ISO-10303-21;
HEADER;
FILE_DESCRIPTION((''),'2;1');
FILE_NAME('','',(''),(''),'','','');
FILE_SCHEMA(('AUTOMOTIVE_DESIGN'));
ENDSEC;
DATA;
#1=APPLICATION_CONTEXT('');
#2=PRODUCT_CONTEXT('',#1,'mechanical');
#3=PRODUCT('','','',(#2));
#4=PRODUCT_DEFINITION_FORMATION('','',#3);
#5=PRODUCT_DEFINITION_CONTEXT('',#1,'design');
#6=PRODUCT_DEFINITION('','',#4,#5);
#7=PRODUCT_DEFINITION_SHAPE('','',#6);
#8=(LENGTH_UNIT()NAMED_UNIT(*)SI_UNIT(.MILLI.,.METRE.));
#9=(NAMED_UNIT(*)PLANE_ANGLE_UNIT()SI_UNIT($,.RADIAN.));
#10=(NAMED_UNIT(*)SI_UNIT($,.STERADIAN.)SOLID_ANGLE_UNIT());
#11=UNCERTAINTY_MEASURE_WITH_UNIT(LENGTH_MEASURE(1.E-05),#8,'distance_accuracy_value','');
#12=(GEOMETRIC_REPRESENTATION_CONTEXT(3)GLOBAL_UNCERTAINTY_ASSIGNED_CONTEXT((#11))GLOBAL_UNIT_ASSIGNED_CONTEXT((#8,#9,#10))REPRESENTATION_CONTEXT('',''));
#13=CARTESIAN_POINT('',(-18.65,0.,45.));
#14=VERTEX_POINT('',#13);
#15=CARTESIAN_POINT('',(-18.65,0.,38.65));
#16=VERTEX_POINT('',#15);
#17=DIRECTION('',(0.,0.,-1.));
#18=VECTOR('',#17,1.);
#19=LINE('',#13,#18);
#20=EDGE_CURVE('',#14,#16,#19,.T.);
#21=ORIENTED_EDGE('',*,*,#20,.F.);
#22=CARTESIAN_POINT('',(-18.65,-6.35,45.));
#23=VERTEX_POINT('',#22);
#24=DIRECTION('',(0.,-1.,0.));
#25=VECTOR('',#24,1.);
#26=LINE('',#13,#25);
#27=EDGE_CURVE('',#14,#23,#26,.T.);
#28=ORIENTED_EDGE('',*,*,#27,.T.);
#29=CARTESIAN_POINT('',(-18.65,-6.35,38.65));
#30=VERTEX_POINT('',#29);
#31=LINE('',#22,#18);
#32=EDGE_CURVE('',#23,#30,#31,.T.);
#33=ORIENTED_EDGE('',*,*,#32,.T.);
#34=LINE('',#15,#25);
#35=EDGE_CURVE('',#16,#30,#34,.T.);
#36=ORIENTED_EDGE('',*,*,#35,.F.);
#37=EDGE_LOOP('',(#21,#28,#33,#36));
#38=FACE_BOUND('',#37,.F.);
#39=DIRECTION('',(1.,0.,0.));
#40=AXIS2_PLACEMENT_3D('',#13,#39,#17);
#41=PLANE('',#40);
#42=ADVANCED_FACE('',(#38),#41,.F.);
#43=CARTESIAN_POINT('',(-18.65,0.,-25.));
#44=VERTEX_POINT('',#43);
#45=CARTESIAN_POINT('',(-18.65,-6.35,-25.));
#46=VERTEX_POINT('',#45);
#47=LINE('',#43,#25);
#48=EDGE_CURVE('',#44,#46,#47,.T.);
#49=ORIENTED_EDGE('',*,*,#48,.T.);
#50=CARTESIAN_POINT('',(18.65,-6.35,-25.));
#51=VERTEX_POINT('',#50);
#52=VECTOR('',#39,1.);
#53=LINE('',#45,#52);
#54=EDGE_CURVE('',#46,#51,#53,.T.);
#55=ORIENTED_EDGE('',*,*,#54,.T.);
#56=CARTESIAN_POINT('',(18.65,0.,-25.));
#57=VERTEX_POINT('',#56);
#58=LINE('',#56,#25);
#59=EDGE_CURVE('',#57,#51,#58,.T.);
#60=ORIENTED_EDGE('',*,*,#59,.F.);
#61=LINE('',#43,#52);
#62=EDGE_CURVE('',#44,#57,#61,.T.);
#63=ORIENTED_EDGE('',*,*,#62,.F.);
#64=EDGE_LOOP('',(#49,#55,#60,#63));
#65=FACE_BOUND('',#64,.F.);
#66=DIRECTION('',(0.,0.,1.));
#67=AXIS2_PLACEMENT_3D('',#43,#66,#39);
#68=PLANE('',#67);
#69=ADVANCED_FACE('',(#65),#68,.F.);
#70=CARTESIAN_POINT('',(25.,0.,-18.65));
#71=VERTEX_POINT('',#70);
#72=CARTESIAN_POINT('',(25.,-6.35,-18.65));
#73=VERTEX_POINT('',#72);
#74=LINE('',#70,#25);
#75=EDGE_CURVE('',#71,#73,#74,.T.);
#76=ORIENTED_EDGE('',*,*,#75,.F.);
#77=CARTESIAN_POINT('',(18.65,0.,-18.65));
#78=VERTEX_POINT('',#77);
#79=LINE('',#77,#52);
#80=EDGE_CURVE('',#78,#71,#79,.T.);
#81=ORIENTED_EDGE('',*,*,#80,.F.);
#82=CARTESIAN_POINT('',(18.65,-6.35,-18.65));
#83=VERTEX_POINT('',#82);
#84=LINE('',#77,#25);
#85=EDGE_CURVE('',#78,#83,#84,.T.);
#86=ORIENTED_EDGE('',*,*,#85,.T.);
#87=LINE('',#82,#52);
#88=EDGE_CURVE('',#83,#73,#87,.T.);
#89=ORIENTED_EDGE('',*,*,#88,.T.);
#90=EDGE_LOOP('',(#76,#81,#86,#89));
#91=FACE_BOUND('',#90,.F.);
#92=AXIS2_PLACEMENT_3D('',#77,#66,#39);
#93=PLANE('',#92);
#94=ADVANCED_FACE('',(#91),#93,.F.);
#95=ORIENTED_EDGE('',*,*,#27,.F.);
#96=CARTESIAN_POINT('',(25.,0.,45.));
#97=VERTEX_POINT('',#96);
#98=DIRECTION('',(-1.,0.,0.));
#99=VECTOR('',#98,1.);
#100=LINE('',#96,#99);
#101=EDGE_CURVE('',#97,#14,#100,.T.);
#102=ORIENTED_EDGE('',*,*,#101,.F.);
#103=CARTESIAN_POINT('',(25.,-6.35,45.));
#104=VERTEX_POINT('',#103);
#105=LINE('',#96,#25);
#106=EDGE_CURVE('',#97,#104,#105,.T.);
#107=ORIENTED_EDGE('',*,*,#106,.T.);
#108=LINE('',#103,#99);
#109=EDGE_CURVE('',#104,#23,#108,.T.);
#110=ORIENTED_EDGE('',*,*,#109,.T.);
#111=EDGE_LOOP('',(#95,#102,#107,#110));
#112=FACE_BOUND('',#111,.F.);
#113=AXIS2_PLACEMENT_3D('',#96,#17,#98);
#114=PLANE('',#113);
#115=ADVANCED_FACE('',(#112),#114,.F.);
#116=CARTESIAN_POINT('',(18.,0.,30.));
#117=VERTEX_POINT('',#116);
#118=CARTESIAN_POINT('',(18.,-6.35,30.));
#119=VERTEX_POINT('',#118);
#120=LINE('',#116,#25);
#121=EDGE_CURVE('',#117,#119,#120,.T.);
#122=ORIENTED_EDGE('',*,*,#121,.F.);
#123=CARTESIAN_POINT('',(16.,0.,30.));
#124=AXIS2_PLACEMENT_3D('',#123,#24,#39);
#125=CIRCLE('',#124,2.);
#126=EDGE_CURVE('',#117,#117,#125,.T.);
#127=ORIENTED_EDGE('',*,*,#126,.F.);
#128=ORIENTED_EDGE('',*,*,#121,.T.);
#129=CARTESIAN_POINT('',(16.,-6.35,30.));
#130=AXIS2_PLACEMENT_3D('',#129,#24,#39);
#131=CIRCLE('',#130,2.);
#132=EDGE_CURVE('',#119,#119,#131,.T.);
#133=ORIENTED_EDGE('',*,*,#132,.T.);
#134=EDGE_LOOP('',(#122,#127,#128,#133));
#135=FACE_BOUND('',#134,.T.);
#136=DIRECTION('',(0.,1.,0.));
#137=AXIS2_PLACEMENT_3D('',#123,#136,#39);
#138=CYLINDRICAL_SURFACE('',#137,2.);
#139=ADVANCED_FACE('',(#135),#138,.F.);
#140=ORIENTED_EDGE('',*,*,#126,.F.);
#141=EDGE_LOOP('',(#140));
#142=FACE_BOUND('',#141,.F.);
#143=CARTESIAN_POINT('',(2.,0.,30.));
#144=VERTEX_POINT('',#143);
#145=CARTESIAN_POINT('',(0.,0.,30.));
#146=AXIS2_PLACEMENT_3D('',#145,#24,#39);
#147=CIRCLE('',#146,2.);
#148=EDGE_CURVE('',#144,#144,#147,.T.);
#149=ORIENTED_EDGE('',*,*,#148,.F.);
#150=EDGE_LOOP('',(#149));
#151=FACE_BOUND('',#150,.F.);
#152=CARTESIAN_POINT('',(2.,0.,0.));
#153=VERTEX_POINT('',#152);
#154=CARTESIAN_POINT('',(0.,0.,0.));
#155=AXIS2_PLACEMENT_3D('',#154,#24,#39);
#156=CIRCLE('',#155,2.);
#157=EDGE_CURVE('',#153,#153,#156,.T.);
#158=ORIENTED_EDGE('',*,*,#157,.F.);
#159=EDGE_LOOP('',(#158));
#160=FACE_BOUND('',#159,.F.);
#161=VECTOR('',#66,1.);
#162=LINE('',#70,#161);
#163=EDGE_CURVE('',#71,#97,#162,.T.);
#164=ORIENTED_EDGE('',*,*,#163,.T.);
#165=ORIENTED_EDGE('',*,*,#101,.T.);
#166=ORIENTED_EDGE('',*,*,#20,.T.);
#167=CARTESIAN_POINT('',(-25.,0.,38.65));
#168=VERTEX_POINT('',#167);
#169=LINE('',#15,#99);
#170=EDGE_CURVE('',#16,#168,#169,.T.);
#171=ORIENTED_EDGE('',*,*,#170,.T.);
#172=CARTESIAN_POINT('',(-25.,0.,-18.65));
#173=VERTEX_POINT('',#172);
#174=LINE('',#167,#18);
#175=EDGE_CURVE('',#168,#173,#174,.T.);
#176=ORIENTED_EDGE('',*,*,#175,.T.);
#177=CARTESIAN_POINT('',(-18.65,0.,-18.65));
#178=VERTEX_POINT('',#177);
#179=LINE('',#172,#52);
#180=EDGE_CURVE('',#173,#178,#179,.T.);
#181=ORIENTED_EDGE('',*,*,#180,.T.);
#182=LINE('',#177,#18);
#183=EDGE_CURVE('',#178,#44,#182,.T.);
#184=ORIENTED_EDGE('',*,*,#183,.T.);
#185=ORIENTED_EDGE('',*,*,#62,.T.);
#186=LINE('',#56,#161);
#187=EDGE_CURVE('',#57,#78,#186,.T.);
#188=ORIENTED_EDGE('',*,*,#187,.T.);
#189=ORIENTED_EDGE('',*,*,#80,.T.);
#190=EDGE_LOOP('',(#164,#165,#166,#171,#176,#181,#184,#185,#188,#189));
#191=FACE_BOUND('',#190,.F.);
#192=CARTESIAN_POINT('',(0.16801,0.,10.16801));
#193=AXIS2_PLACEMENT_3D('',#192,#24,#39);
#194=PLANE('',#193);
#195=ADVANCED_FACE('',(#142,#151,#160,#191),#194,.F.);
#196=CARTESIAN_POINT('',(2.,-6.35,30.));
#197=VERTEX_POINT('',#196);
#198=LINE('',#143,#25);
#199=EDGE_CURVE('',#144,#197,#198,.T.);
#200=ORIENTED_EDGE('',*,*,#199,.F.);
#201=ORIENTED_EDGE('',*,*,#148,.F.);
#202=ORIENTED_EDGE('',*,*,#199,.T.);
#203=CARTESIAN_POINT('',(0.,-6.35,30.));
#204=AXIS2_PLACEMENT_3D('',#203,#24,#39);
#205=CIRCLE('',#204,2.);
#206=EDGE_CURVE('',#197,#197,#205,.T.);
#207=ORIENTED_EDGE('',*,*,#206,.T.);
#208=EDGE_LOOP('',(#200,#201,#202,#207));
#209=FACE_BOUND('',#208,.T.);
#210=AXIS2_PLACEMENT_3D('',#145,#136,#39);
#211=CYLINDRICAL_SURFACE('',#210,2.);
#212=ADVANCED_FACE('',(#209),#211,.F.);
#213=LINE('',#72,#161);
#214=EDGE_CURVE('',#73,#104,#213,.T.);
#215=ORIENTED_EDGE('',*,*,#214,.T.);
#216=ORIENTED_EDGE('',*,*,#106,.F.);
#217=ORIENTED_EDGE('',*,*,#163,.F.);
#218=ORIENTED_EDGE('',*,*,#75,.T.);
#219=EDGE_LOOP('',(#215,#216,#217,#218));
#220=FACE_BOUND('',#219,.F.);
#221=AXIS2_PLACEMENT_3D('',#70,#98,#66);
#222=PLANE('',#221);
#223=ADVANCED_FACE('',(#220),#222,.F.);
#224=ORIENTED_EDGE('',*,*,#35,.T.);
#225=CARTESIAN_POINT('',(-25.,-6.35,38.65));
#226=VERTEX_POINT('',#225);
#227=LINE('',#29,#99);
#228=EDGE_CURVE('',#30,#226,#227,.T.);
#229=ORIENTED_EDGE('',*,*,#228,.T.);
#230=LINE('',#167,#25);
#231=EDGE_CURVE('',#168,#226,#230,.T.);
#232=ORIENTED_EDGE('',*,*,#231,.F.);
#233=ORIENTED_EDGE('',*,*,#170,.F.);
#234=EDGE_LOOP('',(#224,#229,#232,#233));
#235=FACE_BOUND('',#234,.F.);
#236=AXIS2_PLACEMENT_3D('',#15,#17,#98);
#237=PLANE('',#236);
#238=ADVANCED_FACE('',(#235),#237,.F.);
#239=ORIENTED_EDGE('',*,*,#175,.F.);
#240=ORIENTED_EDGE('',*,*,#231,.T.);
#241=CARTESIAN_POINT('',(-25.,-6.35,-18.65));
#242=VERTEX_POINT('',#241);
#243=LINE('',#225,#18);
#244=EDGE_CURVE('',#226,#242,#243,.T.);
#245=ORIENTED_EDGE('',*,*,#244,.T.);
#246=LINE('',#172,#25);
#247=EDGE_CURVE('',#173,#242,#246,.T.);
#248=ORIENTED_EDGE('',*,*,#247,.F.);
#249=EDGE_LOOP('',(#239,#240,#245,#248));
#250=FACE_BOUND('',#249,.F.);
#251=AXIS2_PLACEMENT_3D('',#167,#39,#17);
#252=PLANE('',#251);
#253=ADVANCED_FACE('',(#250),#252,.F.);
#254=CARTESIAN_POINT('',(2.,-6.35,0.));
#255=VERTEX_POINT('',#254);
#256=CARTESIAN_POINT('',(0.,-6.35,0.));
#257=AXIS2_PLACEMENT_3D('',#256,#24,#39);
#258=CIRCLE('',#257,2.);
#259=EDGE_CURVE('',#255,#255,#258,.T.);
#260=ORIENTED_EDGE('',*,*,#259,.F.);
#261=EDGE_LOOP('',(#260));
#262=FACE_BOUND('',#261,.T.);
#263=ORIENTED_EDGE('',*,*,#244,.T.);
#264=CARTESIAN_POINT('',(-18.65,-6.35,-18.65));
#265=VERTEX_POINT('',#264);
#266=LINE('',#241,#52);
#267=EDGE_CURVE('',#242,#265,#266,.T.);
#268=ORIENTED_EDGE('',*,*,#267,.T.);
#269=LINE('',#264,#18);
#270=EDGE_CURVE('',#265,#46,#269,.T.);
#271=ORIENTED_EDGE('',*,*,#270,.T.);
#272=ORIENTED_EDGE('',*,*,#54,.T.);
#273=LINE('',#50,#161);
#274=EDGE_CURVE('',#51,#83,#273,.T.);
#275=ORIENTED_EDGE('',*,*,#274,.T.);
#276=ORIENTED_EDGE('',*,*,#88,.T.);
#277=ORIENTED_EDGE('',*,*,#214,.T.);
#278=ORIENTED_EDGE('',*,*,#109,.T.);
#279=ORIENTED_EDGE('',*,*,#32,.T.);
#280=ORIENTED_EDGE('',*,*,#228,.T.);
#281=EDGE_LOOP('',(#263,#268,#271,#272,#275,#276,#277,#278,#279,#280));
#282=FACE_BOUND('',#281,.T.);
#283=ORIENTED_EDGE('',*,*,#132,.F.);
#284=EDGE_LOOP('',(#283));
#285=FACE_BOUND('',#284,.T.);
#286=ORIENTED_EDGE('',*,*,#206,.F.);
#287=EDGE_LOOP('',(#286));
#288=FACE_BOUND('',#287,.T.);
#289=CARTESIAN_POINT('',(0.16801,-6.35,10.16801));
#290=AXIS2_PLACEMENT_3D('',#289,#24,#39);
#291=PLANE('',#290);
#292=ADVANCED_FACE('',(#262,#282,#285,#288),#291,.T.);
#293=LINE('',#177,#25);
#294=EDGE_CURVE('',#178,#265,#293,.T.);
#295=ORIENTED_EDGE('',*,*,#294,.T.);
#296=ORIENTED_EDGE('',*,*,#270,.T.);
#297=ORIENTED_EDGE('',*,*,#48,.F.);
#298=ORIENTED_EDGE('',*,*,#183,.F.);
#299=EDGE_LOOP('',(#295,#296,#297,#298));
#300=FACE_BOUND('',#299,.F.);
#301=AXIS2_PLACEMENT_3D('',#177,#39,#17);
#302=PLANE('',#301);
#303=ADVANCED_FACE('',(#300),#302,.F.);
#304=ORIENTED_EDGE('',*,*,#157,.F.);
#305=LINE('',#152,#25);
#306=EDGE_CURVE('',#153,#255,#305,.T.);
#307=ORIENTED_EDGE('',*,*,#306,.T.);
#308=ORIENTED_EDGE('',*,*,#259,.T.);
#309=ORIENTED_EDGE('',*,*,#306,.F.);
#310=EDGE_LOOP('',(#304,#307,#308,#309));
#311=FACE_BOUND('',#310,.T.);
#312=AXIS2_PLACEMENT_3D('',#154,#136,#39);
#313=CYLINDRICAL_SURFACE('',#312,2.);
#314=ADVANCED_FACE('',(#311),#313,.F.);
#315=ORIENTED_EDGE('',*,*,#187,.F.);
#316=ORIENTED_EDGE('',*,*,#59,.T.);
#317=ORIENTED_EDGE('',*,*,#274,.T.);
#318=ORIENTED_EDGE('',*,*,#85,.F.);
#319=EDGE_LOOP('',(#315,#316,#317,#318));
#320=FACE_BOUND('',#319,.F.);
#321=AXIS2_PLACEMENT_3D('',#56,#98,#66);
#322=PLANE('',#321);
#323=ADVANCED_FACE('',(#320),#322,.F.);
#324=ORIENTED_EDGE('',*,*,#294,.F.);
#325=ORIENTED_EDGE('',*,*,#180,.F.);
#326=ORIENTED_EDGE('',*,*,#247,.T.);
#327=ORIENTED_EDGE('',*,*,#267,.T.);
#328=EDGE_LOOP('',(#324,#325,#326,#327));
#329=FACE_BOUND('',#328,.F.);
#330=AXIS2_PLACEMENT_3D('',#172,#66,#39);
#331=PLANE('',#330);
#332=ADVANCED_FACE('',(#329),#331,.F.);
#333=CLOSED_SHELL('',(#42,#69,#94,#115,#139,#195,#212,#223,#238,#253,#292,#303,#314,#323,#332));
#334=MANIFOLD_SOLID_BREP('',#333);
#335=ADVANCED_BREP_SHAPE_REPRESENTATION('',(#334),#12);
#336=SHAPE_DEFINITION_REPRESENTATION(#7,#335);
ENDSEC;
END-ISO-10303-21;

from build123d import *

# Parameters (mm, degrees)
F0_R     = 2
F1_DEPTH = 6.35


# Not quite as in the source:
# - a length typed as a fraction of an inch, garbled in the dataset ("3 / 203.2 mm" for 3/8 in), is restored


with BuildPart() as f1:
    # F0 (on Front) → F1 (new body)
    with BuildSketch(Plane.XZ):
        Polygon((25, 45), (-18.65, 45), (-18.65, 38.65), (-25, 38.65), (-25, 30), (-25, -18.65), (-18.65, -18.65), (-18.65, -25), (18.65, -25), (18.65, -18.65), (25, -18.65), align=None)
        Circle(F0_R, mode=Mode.SUBTRACT)
        with Locations((0, 30)):
            Circle(F0_R, mode=Mode.SUBTRACT)
        with Locations((16, 30)):
            Circle(F0_R, mode=Mode.SUBTRACT)
    extrude(amount=F1_DEPTH)


solid = f1.part
